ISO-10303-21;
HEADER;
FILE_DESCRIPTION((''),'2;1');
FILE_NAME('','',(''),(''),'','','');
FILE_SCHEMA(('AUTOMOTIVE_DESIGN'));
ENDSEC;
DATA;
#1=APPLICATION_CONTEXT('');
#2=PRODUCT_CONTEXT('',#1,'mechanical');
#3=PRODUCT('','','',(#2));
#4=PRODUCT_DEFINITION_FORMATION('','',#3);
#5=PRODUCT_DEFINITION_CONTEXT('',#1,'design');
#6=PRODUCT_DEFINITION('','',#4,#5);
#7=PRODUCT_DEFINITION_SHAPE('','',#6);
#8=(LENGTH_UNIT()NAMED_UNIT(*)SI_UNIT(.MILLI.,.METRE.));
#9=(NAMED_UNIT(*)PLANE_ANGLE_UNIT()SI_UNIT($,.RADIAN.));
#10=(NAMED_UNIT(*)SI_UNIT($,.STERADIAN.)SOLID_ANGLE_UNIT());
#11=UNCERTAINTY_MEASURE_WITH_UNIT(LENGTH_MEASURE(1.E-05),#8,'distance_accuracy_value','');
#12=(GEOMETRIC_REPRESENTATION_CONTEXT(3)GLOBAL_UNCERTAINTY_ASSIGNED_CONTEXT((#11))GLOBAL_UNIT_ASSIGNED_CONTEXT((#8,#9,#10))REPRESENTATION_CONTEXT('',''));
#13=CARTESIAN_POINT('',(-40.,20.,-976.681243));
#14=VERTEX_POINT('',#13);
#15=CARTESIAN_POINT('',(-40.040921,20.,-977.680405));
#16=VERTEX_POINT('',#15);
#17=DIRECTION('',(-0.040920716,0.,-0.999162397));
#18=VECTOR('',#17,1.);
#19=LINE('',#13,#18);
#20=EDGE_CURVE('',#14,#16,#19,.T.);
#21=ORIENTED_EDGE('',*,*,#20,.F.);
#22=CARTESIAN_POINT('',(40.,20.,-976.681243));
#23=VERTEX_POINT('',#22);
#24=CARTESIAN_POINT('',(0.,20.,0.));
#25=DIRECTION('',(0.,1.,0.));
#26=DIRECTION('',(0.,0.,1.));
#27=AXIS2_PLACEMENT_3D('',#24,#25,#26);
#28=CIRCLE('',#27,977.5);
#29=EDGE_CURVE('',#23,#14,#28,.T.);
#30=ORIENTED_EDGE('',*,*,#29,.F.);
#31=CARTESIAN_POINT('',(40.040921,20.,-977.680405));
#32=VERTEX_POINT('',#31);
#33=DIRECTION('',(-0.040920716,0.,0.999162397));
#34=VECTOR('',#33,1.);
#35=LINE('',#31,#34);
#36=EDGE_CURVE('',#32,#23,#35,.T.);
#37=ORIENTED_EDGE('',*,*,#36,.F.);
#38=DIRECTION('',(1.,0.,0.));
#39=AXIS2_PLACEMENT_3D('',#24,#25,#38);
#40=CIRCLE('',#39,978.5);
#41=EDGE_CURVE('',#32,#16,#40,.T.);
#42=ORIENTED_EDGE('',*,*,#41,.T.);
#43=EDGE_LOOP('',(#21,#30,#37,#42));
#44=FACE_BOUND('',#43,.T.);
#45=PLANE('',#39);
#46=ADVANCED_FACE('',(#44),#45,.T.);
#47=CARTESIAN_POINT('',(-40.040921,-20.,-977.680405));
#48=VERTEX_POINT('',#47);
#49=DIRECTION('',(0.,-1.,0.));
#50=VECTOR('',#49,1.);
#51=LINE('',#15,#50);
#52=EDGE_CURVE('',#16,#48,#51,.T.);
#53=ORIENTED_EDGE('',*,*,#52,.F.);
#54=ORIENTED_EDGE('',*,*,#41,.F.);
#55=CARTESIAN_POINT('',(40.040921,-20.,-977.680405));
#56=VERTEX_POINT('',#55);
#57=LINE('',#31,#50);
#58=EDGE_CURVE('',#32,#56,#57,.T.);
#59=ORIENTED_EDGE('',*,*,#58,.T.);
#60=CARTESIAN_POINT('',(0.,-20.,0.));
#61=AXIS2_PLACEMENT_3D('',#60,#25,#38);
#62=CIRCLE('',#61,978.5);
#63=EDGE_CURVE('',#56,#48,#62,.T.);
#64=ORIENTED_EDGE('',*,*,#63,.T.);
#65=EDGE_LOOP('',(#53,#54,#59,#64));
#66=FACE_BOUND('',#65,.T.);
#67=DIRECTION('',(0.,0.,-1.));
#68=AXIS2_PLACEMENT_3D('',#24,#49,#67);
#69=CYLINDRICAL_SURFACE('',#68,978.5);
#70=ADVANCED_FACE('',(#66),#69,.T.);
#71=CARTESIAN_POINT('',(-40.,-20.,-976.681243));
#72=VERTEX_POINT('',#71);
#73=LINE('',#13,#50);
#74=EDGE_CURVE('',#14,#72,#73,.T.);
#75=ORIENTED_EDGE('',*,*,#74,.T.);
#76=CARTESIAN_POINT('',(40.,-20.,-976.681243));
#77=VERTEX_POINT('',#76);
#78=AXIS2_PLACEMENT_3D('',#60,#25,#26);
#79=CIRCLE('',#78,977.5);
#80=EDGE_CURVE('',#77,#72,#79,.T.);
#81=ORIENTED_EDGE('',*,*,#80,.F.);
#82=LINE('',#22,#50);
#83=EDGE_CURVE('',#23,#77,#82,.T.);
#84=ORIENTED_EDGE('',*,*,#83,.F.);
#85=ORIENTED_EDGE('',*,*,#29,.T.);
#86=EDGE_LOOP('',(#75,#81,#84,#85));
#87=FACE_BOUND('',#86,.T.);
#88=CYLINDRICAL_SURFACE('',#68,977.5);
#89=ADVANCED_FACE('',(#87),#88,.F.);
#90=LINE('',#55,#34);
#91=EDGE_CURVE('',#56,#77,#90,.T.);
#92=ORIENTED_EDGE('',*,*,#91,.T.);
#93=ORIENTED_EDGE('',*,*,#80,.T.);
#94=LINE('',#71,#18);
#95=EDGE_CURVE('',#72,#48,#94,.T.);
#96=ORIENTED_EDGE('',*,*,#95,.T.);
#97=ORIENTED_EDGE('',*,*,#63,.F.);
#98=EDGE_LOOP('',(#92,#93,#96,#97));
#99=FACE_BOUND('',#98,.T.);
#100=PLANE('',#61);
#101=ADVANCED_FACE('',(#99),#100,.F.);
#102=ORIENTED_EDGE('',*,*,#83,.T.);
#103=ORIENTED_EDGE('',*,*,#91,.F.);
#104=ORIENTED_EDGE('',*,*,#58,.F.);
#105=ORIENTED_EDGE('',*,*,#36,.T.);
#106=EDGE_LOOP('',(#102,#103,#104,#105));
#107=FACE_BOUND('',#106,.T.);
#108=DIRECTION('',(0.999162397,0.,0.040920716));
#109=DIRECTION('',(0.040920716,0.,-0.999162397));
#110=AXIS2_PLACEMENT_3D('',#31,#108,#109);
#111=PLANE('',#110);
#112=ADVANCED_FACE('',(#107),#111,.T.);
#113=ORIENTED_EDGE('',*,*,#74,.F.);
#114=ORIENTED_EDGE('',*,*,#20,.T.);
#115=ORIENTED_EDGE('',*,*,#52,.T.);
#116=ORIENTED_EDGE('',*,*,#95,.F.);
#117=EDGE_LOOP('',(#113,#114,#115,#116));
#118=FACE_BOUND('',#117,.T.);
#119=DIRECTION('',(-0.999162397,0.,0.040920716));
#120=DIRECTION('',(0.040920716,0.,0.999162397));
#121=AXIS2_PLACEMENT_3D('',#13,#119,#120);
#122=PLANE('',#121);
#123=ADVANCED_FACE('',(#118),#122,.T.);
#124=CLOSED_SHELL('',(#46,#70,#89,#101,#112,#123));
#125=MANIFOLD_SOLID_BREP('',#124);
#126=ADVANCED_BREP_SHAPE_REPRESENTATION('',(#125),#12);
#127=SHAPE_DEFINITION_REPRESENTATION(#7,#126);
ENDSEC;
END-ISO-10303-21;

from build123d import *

# Parameters (mm, degrees)
SM_BASE_FLANGE_1_DEPTH = 20


# Sheet-metal steps are written as plain solids
with BuildPart() as part:
    # Sketch 1 → 基体-法兰1 (new, symmetric)
    with BuildSketch(Plane(origin=(0, 0, 0), x_dir=(1, 0, 0), z_dir=(0, 1, 0))):
        with BuildLine():
            ThreePointArc((40, 976.681242781), (0, 977.5), (-40, 976.681242781))
            Line((-40, 976.681242781), (-40.040920716, 977.680405178))
            ThreePointArc((-40.040920716, 977.680405178), (0, 978.5), (40.040920716, 977.680405178))
            Line((40.040920716, 977.680405178), (40, 976.681242781))
        make_face()
    extrude(amount=SM_BASE_FLANGE_1_DEPTH, both=True)


solid = part.part
